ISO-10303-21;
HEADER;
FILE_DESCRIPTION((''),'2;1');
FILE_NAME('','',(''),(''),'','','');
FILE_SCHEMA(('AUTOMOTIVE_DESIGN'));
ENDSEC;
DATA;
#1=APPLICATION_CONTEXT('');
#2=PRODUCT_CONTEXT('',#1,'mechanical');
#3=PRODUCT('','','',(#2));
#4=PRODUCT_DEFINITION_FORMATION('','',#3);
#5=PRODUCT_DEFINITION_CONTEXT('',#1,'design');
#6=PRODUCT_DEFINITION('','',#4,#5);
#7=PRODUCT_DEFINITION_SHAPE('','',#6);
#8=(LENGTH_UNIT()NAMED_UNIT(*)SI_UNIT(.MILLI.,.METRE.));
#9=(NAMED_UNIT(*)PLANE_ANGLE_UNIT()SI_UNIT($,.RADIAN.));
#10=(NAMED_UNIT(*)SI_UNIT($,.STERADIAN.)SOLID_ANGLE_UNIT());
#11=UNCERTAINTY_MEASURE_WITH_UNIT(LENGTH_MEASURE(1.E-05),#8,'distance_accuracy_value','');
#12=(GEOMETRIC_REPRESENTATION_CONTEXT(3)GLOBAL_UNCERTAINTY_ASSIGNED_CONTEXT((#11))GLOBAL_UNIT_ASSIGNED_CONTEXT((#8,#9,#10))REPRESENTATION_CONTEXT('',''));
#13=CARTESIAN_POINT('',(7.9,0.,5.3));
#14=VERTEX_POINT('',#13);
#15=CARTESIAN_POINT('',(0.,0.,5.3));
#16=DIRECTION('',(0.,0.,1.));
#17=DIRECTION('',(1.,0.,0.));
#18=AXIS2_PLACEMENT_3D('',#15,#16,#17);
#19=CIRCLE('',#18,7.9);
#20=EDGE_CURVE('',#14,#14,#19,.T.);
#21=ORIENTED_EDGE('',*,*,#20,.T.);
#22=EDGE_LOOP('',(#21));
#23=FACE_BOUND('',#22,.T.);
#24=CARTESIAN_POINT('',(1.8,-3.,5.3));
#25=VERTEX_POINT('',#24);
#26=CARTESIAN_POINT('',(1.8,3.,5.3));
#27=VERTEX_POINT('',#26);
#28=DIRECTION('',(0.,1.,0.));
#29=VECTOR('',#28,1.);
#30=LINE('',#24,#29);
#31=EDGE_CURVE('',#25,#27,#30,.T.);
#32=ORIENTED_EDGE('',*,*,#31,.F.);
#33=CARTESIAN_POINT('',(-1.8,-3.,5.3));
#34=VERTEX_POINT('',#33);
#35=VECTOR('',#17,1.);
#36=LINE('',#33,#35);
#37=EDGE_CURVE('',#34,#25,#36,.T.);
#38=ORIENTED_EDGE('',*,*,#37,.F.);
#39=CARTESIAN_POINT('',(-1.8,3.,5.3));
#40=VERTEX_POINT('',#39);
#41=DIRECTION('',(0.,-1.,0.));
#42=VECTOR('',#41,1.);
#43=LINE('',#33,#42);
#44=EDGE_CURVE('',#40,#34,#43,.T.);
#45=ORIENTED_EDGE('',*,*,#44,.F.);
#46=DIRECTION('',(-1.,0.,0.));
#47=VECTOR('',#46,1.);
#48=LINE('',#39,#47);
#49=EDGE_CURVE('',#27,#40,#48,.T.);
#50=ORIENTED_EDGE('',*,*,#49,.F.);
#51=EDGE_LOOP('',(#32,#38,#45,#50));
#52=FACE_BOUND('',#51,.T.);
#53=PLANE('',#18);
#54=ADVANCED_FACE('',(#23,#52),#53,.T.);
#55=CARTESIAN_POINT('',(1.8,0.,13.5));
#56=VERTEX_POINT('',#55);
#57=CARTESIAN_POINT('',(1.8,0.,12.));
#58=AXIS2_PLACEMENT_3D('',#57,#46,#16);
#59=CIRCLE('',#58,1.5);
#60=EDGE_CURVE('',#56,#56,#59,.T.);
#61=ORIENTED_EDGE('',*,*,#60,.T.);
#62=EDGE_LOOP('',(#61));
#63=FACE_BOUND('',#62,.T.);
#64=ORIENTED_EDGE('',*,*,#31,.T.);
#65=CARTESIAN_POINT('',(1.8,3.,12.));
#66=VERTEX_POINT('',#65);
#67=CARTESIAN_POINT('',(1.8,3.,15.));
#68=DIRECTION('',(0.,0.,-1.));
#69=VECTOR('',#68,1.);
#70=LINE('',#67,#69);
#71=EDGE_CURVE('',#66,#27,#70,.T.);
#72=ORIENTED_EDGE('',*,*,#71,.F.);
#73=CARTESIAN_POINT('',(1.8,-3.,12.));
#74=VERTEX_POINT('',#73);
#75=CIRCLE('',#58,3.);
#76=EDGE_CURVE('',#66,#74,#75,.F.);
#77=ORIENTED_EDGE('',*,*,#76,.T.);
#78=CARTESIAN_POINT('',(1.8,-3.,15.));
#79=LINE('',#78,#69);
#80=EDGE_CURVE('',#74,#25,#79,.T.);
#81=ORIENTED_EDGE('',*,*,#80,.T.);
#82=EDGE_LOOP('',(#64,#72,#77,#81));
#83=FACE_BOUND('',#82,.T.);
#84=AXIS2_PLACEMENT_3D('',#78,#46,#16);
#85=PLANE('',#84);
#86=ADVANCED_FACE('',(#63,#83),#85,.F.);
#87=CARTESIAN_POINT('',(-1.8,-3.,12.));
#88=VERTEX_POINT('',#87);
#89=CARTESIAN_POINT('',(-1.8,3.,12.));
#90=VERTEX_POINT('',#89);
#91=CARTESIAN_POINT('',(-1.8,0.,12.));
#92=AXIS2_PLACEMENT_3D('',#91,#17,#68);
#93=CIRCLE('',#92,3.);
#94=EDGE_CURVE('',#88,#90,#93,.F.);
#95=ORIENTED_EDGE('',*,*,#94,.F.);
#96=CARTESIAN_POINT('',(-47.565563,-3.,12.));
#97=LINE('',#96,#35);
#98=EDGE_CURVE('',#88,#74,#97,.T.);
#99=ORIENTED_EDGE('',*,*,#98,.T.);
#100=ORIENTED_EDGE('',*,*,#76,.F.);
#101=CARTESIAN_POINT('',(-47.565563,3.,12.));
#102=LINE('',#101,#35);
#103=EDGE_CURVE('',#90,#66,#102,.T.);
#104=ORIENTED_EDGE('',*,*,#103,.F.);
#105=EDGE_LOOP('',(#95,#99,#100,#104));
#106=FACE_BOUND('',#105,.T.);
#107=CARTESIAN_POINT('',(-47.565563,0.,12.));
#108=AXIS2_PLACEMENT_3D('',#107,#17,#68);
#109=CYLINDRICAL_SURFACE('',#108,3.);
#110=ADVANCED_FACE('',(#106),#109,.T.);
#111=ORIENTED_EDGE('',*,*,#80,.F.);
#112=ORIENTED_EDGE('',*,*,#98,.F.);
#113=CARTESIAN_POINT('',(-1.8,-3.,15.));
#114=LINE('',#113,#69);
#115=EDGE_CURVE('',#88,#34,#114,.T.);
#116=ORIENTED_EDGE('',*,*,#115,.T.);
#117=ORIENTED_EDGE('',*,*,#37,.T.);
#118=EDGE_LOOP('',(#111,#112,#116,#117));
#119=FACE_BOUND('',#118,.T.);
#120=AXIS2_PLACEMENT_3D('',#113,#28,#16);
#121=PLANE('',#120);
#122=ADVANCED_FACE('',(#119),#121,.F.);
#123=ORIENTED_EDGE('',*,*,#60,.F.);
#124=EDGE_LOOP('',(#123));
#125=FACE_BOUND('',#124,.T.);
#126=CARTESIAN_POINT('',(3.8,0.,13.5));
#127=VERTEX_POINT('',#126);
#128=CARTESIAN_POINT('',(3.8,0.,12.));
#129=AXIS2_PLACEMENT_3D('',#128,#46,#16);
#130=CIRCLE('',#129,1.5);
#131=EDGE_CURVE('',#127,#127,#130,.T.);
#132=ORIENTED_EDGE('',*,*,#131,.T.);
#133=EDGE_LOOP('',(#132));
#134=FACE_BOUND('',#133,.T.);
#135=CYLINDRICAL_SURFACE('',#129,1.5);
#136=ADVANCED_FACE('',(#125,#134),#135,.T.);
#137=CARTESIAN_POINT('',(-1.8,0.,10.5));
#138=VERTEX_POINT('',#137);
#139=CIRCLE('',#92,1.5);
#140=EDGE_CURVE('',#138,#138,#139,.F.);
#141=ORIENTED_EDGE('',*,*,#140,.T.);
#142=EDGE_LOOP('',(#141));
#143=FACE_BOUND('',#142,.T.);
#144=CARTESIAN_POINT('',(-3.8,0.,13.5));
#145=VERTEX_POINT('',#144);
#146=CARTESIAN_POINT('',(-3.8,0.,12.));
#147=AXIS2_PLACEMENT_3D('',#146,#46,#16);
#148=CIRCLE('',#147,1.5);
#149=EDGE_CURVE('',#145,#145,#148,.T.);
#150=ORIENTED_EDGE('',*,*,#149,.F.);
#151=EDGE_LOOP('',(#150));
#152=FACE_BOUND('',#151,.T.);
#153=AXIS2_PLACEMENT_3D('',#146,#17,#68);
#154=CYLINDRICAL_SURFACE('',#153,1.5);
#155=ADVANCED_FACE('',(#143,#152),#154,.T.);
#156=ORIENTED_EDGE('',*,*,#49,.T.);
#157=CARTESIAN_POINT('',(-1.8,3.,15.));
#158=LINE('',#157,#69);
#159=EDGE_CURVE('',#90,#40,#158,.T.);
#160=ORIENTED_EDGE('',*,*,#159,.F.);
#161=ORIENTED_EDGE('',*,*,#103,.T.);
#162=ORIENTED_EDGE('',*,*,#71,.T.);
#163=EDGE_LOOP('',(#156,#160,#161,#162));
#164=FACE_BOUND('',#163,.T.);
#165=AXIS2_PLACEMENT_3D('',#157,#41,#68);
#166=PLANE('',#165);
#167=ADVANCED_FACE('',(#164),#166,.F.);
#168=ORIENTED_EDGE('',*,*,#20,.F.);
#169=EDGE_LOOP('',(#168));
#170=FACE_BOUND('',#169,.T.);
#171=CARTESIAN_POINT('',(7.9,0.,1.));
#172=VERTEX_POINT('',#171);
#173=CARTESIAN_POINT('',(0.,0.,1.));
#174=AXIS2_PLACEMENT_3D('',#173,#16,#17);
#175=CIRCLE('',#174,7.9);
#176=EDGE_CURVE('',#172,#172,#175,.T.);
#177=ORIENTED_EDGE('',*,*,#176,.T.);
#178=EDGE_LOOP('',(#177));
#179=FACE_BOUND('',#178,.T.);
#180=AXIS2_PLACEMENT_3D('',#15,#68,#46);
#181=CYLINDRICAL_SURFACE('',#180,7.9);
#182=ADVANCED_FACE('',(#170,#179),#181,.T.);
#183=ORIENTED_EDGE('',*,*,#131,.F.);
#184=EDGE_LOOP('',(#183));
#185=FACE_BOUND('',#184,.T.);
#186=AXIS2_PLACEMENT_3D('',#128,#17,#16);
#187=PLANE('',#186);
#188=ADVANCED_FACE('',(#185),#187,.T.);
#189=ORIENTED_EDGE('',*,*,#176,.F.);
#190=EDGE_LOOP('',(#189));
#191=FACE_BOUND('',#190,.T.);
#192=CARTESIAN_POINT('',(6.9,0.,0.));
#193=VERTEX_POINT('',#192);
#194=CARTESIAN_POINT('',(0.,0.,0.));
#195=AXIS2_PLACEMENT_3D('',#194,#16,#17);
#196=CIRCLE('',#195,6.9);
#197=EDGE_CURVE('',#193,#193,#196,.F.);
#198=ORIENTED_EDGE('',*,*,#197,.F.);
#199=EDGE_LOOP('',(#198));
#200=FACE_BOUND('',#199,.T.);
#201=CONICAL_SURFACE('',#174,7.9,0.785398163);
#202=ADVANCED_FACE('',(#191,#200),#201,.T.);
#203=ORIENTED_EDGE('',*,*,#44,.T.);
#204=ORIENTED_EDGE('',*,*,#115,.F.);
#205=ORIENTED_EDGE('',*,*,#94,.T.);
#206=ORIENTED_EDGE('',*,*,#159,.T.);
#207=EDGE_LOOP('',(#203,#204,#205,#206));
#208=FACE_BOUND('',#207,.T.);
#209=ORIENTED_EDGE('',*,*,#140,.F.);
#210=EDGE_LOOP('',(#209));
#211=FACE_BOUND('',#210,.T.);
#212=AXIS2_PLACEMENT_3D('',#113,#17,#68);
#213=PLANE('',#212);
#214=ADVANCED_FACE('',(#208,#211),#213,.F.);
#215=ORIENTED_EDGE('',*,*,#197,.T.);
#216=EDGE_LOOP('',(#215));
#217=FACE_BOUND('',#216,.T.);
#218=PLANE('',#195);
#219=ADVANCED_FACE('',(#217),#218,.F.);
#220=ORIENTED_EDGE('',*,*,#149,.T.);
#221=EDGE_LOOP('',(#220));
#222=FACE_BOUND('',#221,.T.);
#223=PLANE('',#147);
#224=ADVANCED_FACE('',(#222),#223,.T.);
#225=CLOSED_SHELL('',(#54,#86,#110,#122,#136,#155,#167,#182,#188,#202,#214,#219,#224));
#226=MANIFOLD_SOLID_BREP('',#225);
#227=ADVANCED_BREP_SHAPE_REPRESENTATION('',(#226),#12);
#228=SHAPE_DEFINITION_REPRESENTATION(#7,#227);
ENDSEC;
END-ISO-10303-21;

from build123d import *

# Parameters (mm, degrees)
SKETCH_1_R          = 7.9
EXTRUDE_1_DEPTH     = 5.3
SKETCH_2_W          = 3.6
SKETCH_2_H          = 6
EXTRUDE_2_DEPTH     = 9.7
CUT_EXTRUDE_START   = -3.6
CUT_EXTRUDE_1_DEPTH = 3.6
CHAMFER_1_SIZE      = 1
SKETCH_4_R          = 1.5
EXTRUDE_3_DEPTH     = 2


# Read off the part's stored shape, not the designer's step: 切除-拉伸1
with BuildPart() as part:
    # 草图1 → 凸台-拉伸1 (new body)
    with BuildSketch(Plane.XY):
        Circle(SKETCH_1_R)
    extrude(amount=EXTRUDE_1_DEPTH)

    # 草图2 → 凸台-拉伸2 (add)
    with BuildSketch(Plane.XY.offset(5.3)):
        Rectangle(SKETCH_2_W, SKETCH_2_H)
    extrude(amount=EXTRUDE_2_DEPTH)

    # 切除-拉伸1 outline → 切除-拉伸1 (cut)
    with BuildSketch(Plane.ZY.offset(1.8).offset(CUT_EXTRUDE_START)):
        with BuildLine():
            Line((15, 3), (12, 3))
            ThreePointArc((12, 3), (14.121320344, 2.121320344), (15, 0))
            Line((15, 0), (15, 3))
        make_face()
        with BuildLine():
            Line((15, -3), (15, 0))
            ThreePointArc((15, 0), (14.121320344, -2.121320344), (12, -3))
            Line((12, -3), (15, -3))
        make_face()
    extrude(amount=CUT_EXTRUDE_1_DEPTH, mode=Mode.SUBTRACT)

    # 倒角1
    chamfer_1_edges = [part.edges().sort_by_distance(p)[0] for p in [
        (-7.9, 0, 0),
    ]]
    chamfer(chamfer_1_edges, length=CHAMFER_1_SIZE)

    # 草图4 → 凸台-拉伸3 (add)
    with BuildSketch(Plane.ZY.offset(1.8)):
        with Locations(Location((12, 0, 0), (0, 0, 180))):
            Circle(SKETCH_4_R)
    extrude_3 = extrude(amount=EXTRUDE_3_DEPTH)

    # 镜向1: 凸台-拉伸3 across plane
    add(extrude_3.mirror(Plane(origin=(0, 0, 0), x_dir=(0, 0, 1), z_dir=(1, 0, 0))))


solid = part.part
